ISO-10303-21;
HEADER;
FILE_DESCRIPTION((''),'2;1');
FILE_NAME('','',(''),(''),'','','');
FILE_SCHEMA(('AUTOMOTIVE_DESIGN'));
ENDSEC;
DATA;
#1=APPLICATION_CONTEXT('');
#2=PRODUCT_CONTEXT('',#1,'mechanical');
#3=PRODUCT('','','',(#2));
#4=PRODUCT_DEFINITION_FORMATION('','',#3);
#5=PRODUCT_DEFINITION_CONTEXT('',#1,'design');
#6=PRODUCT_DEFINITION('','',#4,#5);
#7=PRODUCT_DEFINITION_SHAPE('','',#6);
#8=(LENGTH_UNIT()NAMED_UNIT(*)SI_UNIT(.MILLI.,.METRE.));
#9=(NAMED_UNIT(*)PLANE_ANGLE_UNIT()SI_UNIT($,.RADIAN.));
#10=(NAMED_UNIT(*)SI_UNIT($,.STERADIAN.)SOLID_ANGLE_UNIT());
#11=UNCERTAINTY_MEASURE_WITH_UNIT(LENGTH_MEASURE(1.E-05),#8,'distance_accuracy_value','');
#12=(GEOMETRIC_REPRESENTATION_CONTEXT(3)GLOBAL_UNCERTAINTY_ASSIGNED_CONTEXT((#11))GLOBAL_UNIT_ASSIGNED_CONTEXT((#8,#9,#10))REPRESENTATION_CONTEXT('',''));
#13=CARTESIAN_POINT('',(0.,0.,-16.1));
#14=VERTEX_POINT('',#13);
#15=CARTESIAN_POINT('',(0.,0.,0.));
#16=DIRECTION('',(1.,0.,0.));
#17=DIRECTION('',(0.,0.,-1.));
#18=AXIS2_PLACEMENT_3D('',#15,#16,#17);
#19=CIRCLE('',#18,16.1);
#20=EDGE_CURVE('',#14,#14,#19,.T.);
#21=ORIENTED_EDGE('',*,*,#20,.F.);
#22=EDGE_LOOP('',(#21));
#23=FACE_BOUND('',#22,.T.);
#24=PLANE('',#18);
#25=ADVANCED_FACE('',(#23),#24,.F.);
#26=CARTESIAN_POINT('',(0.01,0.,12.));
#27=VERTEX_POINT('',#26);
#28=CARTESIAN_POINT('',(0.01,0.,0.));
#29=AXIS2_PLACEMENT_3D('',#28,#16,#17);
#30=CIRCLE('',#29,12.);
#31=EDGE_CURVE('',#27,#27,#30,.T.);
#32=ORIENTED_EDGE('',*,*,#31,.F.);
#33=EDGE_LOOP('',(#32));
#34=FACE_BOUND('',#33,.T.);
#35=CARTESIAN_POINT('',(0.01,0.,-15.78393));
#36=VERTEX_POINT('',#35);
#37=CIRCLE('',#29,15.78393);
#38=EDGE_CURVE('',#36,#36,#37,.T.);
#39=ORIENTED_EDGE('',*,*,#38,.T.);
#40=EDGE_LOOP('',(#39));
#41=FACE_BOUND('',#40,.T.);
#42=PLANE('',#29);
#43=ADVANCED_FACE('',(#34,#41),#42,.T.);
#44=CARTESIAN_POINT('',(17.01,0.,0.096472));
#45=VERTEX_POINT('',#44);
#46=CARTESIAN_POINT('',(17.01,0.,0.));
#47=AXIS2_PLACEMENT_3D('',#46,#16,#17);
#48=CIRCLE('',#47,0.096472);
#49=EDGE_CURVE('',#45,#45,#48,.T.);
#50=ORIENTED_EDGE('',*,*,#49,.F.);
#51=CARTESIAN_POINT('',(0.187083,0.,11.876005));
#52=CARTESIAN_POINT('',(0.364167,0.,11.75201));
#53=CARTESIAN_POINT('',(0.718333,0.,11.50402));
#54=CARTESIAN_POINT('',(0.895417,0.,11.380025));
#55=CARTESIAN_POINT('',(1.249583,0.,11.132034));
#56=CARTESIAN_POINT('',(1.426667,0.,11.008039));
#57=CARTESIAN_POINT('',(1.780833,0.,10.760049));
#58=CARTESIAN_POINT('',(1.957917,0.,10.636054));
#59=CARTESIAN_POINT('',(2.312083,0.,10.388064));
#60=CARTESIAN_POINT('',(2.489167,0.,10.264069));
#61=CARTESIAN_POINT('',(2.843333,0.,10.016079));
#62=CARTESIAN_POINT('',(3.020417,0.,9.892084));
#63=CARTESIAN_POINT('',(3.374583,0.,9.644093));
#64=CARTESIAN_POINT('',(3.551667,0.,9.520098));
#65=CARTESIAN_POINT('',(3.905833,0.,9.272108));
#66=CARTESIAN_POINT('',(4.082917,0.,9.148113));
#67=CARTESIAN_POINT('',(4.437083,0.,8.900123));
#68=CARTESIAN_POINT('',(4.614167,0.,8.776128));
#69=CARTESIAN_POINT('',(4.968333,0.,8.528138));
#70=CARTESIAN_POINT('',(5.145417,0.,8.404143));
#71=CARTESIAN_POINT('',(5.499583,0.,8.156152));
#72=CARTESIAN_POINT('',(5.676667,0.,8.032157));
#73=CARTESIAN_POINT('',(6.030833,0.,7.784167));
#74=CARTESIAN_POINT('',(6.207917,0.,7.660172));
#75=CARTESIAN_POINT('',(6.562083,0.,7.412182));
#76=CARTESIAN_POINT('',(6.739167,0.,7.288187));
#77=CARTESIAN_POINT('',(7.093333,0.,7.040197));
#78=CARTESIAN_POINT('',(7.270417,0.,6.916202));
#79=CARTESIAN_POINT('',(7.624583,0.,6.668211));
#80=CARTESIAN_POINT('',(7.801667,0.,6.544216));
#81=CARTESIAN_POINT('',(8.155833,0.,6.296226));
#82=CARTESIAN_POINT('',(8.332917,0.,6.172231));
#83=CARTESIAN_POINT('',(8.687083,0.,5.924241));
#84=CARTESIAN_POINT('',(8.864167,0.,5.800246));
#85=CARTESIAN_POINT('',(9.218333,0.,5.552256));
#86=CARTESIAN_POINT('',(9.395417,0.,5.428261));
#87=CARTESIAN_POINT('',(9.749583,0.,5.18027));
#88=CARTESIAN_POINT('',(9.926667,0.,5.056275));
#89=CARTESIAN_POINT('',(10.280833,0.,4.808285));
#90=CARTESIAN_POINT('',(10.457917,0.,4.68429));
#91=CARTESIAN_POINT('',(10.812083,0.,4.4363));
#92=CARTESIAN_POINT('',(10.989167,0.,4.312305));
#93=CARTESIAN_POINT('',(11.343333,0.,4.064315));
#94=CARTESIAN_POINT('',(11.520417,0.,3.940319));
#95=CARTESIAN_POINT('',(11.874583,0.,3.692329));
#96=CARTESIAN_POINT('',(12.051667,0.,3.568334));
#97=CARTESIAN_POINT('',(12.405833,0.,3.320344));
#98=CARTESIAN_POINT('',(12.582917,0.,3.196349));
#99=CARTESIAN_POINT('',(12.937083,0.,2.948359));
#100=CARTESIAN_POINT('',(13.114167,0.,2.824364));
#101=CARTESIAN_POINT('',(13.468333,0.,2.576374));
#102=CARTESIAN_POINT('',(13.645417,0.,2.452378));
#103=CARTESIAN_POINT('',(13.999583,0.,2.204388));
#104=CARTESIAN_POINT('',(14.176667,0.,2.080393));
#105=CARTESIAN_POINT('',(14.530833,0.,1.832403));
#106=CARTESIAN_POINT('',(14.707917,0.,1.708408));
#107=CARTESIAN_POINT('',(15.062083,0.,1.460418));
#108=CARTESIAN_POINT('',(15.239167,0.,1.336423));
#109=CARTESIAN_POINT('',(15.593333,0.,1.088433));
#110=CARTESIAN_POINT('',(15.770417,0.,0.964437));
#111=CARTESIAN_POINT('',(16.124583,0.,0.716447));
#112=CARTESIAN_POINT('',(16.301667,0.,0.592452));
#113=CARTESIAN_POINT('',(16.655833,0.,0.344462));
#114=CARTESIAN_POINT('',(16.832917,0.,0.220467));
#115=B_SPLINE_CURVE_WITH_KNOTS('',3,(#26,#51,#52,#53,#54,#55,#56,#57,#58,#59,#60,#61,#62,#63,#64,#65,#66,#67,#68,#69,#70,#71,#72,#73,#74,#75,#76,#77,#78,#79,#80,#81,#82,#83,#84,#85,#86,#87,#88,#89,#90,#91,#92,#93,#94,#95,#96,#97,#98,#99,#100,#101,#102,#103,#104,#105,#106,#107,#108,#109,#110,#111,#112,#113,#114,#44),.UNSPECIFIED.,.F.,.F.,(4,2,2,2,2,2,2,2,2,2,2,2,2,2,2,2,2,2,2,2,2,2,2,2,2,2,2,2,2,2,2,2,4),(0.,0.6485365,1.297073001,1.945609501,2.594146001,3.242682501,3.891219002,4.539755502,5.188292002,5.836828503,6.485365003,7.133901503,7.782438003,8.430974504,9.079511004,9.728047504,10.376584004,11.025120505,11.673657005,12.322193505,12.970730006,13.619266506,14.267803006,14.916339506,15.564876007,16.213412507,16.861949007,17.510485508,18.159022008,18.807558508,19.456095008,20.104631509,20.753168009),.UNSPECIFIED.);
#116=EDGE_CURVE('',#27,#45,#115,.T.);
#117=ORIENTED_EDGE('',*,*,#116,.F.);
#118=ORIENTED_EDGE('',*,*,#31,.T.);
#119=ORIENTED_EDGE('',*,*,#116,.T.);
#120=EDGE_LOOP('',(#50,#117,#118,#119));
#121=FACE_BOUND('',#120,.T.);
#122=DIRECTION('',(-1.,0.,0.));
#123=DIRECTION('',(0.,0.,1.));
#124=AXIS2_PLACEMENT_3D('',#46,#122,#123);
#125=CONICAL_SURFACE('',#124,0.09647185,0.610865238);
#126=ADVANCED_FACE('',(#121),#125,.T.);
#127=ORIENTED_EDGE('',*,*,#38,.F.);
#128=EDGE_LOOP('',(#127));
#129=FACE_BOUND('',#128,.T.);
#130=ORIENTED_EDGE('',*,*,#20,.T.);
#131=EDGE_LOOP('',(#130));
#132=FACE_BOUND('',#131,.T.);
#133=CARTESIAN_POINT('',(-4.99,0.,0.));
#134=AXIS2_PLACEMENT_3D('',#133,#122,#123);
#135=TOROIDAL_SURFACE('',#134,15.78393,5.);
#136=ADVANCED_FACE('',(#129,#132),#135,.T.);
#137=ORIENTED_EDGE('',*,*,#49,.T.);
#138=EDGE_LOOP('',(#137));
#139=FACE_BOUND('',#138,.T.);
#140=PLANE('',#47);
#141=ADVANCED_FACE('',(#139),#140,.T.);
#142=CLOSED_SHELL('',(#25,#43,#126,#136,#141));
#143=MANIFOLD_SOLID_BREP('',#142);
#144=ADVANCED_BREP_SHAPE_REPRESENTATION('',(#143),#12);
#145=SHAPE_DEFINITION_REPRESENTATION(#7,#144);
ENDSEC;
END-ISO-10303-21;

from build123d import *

# Parameters (mm, degrees)
SKETCH1_R           = 16.1
BOSS_EXTRUDE1_DEPTH = 0.01
FILLET1_R           = 5
SKETCH2_R           = 12
BOSS_EXTRUDE2_DEPTH = 17
CHAMFER1_SIZE       = 17
CHAMFER1_SIZE_2     = 11.90352815


with BuildPart() as part:
    # Sketch1 → Boss-Extrude1 (new body)
    with BuildSketch(Plane(origin=(0, 0, 0), x_dir=(0, 0, -1), z_dir=(1, 0, 0))):
        with Locations(Location((0, 0, 0), (0, 0, 180))):
            Circle(SKETCH1_R)
    extrude(amount=BOSS_EXTRUDE1_DEPTH)

    # Fillet1
    # the kernel refuses this fillet: 5 mm, written as the material it takes off along each edge
    with BuildSketch(Plane(origin=(0.01, 0, 0), x_dir=(0, 0, 1), z_dir=(0, 1, 0))) as fillet1_piece_1:
        with BuildLine():
            CenterArc((15.783930387, -5), FILLET1_R, 86.375692506, 3.624307494)
            Line((15.783930387, 0), (16.1, 0))
            Line((16.1, 0), (16.1, -0.01))
        make_face()
    revolve(axis=Axis((0.01, 0, 0), (1, 0, 0)), mode=Mode.SUBTRACT)

    # Sketch2 → Boss-Extrude2 (add)
    with BuildSketch(Plane(origin=(0.01, 0, 0), x_dir=(0, 0, -1), z_dir=(1, 0, 0))):
        Circle(SKETCH2_R)
    extrude(amount=BOSS_EXTRUDE2_DEPTH)

    # Chamfer1
    # the kernel refuses this chamfer: 17, 11.90352815 mm, written as the material it takes off along each edge
    with BuildSketch(Plane(origin=(17.01, 0, 0), x_dir=(0, 0, -1), z_dir=(0, -1, 0))) as chamfer1_piece_1:
        Polygon((12, -CHAMFER1_SIZE), (12 - CHAMFER1_SIZE_2, 0), (12, 0), align=None)
    revolve(axis=Axis((17.01, 0, 0), (1, 0, 0)), mode=Mode.SUBTRACT)


solid = part.part
